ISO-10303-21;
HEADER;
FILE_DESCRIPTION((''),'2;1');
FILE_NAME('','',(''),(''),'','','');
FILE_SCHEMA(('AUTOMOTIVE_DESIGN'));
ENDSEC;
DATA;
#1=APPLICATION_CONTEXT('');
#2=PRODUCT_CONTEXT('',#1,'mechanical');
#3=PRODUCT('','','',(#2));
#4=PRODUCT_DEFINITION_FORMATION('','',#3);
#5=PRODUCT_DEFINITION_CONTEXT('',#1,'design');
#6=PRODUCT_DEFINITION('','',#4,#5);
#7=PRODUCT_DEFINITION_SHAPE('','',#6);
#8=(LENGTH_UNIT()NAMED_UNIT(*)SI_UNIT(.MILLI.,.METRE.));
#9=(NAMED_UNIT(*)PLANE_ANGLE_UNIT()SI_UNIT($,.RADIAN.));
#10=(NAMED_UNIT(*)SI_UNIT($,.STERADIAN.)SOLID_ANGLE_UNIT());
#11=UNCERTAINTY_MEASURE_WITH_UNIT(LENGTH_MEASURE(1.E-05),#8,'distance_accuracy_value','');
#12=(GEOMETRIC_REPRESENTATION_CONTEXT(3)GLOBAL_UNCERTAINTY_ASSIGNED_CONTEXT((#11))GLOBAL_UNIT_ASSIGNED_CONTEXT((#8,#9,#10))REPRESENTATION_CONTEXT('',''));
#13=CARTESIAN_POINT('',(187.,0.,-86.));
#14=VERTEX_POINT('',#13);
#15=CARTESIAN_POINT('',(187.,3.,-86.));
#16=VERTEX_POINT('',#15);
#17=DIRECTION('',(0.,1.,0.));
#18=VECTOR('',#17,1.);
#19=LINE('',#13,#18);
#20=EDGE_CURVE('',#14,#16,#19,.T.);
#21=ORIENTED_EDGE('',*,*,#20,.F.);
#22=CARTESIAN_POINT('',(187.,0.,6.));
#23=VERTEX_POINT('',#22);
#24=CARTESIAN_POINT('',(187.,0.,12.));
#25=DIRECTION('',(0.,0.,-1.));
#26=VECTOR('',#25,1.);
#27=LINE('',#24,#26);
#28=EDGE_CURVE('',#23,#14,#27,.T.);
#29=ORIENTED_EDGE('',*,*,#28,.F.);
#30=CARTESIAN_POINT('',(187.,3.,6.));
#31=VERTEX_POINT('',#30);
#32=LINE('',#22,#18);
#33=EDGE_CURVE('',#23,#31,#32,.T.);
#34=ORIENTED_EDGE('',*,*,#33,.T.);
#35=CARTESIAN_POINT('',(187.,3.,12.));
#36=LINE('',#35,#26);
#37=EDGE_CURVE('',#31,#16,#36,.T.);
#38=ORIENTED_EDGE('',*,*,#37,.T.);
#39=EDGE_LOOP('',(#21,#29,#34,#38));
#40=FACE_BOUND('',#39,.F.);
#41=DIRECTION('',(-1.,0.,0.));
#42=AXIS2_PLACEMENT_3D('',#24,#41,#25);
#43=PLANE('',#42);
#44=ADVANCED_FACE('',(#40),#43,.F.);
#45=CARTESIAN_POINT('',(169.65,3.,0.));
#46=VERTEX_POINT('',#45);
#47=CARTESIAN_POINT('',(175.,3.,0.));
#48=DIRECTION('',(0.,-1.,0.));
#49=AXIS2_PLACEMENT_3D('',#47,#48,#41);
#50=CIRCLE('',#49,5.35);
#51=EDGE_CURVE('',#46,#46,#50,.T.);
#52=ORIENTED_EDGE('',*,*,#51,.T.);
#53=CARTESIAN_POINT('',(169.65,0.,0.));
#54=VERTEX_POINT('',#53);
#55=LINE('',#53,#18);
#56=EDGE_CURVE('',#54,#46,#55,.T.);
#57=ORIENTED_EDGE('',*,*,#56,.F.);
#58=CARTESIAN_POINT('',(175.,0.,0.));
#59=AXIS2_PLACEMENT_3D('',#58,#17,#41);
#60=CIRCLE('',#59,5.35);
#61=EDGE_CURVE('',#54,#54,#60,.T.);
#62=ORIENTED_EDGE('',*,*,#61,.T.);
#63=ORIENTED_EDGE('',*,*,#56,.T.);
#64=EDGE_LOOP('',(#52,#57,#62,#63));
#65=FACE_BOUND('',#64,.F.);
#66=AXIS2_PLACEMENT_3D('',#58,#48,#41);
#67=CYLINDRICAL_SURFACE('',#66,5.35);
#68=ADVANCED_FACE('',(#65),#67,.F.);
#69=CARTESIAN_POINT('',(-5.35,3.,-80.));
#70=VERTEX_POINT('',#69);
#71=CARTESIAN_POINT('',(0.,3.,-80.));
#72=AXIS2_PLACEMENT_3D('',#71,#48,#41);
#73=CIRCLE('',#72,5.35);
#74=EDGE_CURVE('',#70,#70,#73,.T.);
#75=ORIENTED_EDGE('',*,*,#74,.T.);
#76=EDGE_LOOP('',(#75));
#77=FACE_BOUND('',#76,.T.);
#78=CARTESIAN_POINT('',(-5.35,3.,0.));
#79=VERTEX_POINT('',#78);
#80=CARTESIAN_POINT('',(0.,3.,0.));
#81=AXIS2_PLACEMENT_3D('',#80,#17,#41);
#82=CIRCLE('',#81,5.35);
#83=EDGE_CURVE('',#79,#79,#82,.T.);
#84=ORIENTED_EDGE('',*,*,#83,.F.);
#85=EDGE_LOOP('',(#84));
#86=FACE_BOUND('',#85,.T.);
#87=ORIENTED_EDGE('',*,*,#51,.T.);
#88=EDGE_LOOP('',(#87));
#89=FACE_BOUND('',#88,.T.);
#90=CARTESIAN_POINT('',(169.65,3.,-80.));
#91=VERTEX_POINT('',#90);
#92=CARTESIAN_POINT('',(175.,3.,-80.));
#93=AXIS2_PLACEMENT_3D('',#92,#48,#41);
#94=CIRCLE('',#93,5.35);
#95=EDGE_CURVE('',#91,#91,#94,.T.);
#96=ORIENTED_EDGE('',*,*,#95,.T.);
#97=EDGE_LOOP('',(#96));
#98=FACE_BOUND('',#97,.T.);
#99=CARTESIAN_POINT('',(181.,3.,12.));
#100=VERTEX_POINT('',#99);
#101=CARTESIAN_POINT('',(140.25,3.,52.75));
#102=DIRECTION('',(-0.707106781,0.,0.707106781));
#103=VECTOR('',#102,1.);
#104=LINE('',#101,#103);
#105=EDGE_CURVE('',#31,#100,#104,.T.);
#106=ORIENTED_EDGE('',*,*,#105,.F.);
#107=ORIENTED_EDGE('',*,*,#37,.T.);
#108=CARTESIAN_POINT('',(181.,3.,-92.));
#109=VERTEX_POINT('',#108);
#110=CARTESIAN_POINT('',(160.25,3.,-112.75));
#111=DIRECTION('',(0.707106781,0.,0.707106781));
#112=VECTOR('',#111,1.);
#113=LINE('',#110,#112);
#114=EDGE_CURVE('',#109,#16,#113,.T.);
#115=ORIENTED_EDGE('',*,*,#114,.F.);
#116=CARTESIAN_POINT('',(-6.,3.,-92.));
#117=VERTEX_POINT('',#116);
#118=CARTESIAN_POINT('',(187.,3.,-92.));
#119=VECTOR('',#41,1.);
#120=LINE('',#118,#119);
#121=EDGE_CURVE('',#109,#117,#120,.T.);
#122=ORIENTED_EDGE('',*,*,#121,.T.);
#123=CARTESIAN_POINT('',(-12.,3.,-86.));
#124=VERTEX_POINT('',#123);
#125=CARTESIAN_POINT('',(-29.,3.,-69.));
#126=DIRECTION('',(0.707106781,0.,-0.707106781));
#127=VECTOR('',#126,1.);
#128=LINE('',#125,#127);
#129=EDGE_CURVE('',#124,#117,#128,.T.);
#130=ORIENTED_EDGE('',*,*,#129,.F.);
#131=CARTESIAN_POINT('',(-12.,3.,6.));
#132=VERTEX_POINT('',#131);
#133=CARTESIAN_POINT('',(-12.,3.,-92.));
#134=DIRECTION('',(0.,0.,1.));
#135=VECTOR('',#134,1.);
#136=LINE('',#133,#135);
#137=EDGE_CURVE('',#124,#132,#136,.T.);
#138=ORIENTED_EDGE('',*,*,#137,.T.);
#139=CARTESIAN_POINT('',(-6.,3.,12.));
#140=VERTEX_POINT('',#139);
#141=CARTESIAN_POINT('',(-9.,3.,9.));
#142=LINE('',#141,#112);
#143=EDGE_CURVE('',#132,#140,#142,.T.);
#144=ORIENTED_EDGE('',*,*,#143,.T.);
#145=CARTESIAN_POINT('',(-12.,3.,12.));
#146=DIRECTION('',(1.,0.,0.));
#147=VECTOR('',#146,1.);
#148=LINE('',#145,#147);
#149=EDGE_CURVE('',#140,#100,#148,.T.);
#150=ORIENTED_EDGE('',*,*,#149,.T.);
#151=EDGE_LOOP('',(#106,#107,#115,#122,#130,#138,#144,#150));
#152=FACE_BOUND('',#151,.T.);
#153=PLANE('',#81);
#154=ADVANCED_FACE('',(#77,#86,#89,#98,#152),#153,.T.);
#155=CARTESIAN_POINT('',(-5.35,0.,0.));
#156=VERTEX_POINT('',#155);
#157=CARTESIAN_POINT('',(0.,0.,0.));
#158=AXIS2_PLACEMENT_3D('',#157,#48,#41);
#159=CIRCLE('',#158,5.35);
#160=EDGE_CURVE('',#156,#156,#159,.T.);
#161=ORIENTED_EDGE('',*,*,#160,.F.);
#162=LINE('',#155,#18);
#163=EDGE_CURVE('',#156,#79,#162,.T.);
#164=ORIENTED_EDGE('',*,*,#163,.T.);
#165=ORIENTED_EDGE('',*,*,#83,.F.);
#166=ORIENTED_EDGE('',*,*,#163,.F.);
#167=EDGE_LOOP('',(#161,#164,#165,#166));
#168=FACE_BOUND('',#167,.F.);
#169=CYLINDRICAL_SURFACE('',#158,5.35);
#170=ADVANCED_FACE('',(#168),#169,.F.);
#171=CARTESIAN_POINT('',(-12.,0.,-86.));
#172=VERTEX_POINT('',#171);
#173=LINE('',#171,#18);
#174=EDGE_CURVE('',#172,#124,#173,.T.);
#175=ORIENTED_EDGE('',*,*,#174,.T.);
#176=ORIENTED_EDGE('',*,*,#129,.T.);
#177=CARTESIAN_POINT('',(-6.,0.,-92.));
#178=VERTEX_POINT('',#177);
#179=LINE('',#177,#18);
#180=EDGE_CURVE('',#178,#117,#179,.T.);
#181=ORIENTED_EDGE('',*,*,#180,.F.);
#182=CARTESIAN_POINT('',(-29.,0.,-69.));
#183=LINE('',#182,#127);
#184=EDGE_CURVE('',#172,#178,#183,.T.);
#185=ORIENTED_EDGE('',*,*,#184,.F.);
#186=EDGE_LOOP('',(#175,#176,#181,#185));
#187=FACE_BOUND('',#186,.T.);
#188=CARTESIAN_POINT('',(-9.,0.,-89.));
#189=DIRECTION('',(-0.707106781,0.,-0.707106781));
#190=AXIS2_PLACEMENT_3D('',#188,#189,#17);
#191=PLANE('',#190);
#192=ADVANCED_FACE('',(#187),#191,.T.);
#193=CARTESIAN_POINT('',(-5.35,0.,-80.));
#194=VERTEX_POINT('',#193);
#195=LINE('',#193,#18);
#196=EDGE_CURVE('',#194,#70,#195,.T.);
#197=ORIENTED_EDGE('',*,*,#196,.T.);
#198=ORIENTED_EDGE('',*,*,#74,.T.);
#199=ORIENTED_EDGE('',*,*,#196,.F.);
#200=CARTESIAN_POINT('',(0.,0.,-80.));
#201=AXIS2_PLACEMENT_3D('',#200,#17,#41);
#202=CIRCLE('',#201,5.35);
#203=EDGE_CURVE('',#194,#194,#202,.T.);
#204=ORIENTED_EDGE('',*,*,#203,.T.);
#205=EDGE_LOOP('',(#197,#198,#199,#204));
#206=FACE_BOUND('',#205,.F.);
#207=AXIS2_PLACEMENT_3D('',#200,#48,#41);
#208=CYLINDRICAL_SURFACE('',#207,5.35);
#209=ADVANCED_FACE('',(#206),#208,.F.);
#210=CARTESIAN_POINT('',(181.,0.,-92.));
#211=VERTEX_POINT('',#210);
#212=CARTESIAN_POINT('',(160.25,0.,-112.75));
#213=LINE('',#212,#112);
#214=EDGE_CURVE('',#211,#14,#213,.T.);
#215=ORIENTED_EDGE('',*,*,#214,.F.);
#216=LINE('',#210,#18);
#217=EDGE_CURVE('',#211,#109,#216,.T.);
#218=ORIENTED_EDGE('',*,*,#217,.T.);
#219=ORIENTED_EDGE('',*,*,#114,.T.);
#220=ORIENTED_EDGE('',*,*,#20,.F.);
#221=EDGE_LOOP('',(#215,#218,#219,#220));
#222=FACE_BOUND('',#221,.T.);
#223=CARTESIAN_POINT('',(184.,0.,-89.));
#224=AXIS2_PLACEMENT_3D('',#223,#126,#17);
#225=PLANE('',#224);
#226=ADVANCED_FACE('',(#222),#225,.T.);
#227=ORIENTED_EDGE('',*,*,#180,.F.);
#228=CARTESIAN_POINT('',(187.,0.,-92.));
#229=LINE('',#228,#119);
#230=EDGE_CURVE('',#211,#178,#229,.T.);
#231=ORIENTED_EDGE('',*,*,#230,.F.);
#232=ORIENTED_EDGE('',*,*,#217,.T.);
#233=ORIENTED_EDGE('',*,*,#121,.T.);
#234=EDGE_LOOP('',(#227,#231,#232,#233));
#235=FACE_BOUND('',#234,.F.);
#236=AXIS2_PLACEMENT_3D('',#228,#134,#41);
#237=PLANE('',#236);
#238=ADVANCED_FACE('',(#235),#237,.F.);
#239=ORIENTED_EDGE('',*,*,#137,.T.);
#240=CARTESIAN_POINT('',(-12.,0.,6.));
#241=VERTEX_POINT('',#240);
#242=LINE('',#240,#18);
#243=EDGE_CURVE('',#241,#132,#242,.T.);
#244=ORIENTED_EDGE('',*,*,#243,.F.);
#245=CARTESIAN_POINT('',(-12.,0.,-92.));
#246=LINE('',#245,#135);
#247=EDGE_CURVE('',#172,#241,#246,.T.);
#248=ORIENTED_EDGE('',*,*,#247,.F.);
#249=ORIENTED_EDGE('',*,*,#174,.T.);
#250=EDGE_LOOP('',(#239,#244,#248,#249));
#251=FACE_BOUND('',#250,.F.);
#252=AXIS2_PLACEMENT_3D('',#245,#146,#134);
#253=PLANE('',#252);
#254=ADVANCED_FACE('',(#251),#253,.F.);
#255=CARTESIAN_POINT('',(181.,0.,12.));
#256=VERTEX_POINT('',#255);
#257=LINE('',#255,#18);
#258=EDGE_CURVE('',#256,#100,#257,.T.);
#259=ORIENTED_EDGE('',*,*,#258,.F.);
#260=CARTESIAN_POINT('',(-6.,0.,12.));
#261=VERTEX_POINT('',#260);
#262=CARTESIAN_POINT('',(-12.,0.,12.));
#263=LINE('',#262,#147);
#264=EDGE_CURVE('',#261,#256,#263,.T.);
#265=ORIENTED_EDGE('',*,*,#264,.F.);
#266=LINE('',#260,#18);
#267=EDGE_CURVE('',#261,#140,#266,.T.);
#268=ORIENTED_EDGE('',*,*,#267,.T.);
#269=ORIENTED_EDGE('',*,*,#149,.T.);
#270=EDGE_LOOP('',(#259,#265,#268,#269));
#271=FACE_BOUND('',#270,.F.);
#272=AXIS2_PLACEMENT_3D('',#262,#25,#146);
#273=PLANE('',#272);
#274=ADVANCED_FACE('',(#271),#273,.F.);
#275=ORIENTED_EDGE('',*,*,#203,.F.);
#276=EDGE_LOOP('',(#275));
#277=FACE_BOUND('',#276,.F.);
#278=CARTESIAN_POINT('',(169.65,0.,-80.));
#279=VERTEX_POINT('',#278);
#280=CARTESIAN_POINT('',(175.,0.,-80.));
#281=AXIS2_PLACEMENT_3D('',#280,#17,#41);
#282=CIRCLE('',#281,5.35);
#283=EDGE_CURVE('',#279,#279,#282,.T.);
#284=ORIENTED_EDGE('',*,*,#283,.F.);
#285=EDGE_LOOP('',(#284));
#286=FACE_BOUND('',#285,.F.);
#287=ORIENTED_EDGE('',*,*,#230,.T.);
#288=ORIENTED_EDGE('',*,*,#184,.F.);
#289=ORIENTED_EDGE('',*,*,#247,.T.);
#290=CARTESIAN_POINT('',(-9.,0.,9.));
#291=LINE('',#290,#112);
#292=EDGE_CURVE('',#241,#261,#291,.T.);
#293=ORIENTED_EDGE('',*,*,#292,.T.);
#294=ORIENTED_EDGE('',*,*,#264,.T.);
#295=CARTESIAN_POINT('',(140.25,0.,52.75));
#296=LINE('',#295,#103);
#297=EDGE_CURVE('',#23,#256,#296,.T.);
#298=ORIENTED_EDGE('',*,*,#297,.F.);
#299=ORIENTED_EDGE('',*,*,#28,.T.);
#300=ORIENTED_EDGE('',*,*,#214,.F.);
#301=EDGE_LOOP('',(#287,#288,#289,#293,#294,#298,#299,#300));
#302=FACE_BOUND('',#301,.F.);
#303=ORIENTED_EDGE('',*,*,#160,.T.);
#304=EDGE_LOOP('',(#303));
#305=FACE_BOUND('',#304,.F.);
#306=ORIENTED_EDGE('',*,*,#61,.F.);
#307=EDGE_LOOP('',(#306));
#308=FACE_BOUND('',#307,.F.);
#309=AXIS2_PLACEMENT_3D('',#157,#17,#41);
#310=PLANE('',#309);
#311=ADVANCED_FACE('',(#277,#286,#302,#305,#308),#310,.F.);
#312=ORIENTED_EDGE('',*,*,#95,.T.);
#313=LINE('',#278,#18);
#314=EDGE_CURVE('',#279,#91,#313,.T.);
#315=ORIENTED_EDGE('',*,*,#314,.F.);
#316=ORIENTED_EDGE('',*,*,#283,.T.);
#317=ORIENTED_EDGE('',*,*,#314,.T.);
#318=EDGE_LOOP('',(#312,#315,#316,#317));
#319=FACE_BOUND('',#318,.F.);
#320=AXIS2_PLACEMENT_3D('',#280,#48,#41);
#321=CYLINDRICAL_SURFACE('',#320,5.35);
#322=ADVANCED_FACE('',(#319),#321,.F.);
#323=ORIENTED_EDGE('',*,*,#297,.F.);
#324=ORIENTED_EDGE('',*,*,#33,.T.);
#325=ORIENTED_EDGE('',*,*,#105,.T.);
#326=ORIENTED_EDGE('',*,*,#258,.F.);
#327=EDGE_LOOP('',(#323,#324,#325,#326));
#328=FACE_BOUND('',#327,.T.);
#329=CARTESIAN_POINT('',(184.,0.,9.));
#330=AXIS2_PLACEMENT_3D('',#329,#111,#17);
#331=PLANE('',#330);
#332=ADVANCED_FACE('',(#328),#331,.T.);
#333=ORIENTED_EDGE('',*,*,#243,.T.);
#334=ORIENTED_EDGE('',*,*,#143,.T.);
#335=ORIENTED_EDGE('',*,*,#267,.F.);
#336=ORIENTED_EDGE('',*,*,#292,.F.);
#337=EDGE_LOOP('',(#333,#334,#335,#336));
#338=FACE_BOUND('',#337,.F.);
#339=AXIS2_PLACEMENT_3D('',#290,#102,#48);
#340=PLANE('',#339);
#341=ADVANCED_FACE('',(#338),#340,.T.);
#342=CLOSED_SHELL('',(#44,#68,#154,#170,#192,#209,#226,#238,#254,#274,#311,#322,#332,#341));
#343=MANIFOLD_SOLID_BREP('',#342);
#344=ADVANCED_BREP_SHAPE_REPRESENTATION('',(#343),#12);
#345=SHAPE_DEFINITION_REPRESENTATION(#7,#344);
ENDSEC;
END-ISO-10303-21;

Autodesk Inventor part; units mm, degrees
ref_plane "YZ Plane" through (0, 0, 0) normal (1, 0, 0) x (0, 1, 0)
ref_plane "XZ Plane" through (0, 0, 0) normal (0, 1, 0) x (-1, 0, 0)
ref_plane "XY Plane" through (0, 0, 0) normal (0, 0, 1) x (1, 0, 0)
sketch "Sketch1" plane through (0, 0, 0) normal (0, 1, 0) x (-1, 0, 0)
  line L0 (0, 0) -> (-175, 0)
  line L1 (-175, 0) -> (-175, -80)
  line L2 (-175, -80) -> (0, -80)
  line L3 (0, -80) -> (0, 0)
  circle A0 centre (0, 0) radius 5.35
  circle A1 centre (0, -80) radius 5.35
  circle A2 centre (-175, -80) radius 5.35
  circle A3 centre (-175, 0) radius 5.35
  line L4 (12, 12) -> (-187, 12)
  line L5 (-187, 12) -> (-187, -92)
  line L6 (-187, -92) -> (12, -92)
  line L7 (12, -92) -> (12, 12)
  dimension "d0" = 175
  dimension "d1" = 80
  dimension "d2" = 10.7
  dimension "d3" = 10.7
  dimension "d4" = 10.7
  dimension "d5" = 10.7
  dimension "d6" = 12
  dimension "d7" = 12
  dimension "d8" = 12
  dimension "d9" = 12
extrude "Plate1" add sketch "Sketch1" along normal blind 3 contours L0 A0 L3 A1 L2 A2 L1 A3 | L7 L6 L5 L4
chamfer "Corner Chamfer1" distance 6 angle 45 4 edges at (-12, 1.5, 12) (187, 1.5, 12) (187, 1.5, -92) (-12, 1.5, -92)
equation "\"d3\" = d2"
equation "\"d4\" = d2"
equation "\"d5\" = d2"
equation "\"d7\" = d6"
equation "\"d8\" = d6"
equation "\"d9\" = d8"
equation "\"d10\" = Thickness"
equation "\"BendRadius\" = Thickness"
equation "\"BendReliefWidth\" = Thickness"
equation "\"BendReliefDepth\" = 0.5 * Thickness"
equation "\"CornerReliefSize\" = 4 * Thickness"
equation "\"MinimumRemnant\" = 2 * Thickness"
equation "\"TransitionRadius\" = BendRadius"
equation "\"JacobiRadiusSize\" = BendRadius"
equation "\"GapSize\" = Thickness"
equation "\"Thickness\" = 3"
properties part number "Extender" material "Stainless Steel"
